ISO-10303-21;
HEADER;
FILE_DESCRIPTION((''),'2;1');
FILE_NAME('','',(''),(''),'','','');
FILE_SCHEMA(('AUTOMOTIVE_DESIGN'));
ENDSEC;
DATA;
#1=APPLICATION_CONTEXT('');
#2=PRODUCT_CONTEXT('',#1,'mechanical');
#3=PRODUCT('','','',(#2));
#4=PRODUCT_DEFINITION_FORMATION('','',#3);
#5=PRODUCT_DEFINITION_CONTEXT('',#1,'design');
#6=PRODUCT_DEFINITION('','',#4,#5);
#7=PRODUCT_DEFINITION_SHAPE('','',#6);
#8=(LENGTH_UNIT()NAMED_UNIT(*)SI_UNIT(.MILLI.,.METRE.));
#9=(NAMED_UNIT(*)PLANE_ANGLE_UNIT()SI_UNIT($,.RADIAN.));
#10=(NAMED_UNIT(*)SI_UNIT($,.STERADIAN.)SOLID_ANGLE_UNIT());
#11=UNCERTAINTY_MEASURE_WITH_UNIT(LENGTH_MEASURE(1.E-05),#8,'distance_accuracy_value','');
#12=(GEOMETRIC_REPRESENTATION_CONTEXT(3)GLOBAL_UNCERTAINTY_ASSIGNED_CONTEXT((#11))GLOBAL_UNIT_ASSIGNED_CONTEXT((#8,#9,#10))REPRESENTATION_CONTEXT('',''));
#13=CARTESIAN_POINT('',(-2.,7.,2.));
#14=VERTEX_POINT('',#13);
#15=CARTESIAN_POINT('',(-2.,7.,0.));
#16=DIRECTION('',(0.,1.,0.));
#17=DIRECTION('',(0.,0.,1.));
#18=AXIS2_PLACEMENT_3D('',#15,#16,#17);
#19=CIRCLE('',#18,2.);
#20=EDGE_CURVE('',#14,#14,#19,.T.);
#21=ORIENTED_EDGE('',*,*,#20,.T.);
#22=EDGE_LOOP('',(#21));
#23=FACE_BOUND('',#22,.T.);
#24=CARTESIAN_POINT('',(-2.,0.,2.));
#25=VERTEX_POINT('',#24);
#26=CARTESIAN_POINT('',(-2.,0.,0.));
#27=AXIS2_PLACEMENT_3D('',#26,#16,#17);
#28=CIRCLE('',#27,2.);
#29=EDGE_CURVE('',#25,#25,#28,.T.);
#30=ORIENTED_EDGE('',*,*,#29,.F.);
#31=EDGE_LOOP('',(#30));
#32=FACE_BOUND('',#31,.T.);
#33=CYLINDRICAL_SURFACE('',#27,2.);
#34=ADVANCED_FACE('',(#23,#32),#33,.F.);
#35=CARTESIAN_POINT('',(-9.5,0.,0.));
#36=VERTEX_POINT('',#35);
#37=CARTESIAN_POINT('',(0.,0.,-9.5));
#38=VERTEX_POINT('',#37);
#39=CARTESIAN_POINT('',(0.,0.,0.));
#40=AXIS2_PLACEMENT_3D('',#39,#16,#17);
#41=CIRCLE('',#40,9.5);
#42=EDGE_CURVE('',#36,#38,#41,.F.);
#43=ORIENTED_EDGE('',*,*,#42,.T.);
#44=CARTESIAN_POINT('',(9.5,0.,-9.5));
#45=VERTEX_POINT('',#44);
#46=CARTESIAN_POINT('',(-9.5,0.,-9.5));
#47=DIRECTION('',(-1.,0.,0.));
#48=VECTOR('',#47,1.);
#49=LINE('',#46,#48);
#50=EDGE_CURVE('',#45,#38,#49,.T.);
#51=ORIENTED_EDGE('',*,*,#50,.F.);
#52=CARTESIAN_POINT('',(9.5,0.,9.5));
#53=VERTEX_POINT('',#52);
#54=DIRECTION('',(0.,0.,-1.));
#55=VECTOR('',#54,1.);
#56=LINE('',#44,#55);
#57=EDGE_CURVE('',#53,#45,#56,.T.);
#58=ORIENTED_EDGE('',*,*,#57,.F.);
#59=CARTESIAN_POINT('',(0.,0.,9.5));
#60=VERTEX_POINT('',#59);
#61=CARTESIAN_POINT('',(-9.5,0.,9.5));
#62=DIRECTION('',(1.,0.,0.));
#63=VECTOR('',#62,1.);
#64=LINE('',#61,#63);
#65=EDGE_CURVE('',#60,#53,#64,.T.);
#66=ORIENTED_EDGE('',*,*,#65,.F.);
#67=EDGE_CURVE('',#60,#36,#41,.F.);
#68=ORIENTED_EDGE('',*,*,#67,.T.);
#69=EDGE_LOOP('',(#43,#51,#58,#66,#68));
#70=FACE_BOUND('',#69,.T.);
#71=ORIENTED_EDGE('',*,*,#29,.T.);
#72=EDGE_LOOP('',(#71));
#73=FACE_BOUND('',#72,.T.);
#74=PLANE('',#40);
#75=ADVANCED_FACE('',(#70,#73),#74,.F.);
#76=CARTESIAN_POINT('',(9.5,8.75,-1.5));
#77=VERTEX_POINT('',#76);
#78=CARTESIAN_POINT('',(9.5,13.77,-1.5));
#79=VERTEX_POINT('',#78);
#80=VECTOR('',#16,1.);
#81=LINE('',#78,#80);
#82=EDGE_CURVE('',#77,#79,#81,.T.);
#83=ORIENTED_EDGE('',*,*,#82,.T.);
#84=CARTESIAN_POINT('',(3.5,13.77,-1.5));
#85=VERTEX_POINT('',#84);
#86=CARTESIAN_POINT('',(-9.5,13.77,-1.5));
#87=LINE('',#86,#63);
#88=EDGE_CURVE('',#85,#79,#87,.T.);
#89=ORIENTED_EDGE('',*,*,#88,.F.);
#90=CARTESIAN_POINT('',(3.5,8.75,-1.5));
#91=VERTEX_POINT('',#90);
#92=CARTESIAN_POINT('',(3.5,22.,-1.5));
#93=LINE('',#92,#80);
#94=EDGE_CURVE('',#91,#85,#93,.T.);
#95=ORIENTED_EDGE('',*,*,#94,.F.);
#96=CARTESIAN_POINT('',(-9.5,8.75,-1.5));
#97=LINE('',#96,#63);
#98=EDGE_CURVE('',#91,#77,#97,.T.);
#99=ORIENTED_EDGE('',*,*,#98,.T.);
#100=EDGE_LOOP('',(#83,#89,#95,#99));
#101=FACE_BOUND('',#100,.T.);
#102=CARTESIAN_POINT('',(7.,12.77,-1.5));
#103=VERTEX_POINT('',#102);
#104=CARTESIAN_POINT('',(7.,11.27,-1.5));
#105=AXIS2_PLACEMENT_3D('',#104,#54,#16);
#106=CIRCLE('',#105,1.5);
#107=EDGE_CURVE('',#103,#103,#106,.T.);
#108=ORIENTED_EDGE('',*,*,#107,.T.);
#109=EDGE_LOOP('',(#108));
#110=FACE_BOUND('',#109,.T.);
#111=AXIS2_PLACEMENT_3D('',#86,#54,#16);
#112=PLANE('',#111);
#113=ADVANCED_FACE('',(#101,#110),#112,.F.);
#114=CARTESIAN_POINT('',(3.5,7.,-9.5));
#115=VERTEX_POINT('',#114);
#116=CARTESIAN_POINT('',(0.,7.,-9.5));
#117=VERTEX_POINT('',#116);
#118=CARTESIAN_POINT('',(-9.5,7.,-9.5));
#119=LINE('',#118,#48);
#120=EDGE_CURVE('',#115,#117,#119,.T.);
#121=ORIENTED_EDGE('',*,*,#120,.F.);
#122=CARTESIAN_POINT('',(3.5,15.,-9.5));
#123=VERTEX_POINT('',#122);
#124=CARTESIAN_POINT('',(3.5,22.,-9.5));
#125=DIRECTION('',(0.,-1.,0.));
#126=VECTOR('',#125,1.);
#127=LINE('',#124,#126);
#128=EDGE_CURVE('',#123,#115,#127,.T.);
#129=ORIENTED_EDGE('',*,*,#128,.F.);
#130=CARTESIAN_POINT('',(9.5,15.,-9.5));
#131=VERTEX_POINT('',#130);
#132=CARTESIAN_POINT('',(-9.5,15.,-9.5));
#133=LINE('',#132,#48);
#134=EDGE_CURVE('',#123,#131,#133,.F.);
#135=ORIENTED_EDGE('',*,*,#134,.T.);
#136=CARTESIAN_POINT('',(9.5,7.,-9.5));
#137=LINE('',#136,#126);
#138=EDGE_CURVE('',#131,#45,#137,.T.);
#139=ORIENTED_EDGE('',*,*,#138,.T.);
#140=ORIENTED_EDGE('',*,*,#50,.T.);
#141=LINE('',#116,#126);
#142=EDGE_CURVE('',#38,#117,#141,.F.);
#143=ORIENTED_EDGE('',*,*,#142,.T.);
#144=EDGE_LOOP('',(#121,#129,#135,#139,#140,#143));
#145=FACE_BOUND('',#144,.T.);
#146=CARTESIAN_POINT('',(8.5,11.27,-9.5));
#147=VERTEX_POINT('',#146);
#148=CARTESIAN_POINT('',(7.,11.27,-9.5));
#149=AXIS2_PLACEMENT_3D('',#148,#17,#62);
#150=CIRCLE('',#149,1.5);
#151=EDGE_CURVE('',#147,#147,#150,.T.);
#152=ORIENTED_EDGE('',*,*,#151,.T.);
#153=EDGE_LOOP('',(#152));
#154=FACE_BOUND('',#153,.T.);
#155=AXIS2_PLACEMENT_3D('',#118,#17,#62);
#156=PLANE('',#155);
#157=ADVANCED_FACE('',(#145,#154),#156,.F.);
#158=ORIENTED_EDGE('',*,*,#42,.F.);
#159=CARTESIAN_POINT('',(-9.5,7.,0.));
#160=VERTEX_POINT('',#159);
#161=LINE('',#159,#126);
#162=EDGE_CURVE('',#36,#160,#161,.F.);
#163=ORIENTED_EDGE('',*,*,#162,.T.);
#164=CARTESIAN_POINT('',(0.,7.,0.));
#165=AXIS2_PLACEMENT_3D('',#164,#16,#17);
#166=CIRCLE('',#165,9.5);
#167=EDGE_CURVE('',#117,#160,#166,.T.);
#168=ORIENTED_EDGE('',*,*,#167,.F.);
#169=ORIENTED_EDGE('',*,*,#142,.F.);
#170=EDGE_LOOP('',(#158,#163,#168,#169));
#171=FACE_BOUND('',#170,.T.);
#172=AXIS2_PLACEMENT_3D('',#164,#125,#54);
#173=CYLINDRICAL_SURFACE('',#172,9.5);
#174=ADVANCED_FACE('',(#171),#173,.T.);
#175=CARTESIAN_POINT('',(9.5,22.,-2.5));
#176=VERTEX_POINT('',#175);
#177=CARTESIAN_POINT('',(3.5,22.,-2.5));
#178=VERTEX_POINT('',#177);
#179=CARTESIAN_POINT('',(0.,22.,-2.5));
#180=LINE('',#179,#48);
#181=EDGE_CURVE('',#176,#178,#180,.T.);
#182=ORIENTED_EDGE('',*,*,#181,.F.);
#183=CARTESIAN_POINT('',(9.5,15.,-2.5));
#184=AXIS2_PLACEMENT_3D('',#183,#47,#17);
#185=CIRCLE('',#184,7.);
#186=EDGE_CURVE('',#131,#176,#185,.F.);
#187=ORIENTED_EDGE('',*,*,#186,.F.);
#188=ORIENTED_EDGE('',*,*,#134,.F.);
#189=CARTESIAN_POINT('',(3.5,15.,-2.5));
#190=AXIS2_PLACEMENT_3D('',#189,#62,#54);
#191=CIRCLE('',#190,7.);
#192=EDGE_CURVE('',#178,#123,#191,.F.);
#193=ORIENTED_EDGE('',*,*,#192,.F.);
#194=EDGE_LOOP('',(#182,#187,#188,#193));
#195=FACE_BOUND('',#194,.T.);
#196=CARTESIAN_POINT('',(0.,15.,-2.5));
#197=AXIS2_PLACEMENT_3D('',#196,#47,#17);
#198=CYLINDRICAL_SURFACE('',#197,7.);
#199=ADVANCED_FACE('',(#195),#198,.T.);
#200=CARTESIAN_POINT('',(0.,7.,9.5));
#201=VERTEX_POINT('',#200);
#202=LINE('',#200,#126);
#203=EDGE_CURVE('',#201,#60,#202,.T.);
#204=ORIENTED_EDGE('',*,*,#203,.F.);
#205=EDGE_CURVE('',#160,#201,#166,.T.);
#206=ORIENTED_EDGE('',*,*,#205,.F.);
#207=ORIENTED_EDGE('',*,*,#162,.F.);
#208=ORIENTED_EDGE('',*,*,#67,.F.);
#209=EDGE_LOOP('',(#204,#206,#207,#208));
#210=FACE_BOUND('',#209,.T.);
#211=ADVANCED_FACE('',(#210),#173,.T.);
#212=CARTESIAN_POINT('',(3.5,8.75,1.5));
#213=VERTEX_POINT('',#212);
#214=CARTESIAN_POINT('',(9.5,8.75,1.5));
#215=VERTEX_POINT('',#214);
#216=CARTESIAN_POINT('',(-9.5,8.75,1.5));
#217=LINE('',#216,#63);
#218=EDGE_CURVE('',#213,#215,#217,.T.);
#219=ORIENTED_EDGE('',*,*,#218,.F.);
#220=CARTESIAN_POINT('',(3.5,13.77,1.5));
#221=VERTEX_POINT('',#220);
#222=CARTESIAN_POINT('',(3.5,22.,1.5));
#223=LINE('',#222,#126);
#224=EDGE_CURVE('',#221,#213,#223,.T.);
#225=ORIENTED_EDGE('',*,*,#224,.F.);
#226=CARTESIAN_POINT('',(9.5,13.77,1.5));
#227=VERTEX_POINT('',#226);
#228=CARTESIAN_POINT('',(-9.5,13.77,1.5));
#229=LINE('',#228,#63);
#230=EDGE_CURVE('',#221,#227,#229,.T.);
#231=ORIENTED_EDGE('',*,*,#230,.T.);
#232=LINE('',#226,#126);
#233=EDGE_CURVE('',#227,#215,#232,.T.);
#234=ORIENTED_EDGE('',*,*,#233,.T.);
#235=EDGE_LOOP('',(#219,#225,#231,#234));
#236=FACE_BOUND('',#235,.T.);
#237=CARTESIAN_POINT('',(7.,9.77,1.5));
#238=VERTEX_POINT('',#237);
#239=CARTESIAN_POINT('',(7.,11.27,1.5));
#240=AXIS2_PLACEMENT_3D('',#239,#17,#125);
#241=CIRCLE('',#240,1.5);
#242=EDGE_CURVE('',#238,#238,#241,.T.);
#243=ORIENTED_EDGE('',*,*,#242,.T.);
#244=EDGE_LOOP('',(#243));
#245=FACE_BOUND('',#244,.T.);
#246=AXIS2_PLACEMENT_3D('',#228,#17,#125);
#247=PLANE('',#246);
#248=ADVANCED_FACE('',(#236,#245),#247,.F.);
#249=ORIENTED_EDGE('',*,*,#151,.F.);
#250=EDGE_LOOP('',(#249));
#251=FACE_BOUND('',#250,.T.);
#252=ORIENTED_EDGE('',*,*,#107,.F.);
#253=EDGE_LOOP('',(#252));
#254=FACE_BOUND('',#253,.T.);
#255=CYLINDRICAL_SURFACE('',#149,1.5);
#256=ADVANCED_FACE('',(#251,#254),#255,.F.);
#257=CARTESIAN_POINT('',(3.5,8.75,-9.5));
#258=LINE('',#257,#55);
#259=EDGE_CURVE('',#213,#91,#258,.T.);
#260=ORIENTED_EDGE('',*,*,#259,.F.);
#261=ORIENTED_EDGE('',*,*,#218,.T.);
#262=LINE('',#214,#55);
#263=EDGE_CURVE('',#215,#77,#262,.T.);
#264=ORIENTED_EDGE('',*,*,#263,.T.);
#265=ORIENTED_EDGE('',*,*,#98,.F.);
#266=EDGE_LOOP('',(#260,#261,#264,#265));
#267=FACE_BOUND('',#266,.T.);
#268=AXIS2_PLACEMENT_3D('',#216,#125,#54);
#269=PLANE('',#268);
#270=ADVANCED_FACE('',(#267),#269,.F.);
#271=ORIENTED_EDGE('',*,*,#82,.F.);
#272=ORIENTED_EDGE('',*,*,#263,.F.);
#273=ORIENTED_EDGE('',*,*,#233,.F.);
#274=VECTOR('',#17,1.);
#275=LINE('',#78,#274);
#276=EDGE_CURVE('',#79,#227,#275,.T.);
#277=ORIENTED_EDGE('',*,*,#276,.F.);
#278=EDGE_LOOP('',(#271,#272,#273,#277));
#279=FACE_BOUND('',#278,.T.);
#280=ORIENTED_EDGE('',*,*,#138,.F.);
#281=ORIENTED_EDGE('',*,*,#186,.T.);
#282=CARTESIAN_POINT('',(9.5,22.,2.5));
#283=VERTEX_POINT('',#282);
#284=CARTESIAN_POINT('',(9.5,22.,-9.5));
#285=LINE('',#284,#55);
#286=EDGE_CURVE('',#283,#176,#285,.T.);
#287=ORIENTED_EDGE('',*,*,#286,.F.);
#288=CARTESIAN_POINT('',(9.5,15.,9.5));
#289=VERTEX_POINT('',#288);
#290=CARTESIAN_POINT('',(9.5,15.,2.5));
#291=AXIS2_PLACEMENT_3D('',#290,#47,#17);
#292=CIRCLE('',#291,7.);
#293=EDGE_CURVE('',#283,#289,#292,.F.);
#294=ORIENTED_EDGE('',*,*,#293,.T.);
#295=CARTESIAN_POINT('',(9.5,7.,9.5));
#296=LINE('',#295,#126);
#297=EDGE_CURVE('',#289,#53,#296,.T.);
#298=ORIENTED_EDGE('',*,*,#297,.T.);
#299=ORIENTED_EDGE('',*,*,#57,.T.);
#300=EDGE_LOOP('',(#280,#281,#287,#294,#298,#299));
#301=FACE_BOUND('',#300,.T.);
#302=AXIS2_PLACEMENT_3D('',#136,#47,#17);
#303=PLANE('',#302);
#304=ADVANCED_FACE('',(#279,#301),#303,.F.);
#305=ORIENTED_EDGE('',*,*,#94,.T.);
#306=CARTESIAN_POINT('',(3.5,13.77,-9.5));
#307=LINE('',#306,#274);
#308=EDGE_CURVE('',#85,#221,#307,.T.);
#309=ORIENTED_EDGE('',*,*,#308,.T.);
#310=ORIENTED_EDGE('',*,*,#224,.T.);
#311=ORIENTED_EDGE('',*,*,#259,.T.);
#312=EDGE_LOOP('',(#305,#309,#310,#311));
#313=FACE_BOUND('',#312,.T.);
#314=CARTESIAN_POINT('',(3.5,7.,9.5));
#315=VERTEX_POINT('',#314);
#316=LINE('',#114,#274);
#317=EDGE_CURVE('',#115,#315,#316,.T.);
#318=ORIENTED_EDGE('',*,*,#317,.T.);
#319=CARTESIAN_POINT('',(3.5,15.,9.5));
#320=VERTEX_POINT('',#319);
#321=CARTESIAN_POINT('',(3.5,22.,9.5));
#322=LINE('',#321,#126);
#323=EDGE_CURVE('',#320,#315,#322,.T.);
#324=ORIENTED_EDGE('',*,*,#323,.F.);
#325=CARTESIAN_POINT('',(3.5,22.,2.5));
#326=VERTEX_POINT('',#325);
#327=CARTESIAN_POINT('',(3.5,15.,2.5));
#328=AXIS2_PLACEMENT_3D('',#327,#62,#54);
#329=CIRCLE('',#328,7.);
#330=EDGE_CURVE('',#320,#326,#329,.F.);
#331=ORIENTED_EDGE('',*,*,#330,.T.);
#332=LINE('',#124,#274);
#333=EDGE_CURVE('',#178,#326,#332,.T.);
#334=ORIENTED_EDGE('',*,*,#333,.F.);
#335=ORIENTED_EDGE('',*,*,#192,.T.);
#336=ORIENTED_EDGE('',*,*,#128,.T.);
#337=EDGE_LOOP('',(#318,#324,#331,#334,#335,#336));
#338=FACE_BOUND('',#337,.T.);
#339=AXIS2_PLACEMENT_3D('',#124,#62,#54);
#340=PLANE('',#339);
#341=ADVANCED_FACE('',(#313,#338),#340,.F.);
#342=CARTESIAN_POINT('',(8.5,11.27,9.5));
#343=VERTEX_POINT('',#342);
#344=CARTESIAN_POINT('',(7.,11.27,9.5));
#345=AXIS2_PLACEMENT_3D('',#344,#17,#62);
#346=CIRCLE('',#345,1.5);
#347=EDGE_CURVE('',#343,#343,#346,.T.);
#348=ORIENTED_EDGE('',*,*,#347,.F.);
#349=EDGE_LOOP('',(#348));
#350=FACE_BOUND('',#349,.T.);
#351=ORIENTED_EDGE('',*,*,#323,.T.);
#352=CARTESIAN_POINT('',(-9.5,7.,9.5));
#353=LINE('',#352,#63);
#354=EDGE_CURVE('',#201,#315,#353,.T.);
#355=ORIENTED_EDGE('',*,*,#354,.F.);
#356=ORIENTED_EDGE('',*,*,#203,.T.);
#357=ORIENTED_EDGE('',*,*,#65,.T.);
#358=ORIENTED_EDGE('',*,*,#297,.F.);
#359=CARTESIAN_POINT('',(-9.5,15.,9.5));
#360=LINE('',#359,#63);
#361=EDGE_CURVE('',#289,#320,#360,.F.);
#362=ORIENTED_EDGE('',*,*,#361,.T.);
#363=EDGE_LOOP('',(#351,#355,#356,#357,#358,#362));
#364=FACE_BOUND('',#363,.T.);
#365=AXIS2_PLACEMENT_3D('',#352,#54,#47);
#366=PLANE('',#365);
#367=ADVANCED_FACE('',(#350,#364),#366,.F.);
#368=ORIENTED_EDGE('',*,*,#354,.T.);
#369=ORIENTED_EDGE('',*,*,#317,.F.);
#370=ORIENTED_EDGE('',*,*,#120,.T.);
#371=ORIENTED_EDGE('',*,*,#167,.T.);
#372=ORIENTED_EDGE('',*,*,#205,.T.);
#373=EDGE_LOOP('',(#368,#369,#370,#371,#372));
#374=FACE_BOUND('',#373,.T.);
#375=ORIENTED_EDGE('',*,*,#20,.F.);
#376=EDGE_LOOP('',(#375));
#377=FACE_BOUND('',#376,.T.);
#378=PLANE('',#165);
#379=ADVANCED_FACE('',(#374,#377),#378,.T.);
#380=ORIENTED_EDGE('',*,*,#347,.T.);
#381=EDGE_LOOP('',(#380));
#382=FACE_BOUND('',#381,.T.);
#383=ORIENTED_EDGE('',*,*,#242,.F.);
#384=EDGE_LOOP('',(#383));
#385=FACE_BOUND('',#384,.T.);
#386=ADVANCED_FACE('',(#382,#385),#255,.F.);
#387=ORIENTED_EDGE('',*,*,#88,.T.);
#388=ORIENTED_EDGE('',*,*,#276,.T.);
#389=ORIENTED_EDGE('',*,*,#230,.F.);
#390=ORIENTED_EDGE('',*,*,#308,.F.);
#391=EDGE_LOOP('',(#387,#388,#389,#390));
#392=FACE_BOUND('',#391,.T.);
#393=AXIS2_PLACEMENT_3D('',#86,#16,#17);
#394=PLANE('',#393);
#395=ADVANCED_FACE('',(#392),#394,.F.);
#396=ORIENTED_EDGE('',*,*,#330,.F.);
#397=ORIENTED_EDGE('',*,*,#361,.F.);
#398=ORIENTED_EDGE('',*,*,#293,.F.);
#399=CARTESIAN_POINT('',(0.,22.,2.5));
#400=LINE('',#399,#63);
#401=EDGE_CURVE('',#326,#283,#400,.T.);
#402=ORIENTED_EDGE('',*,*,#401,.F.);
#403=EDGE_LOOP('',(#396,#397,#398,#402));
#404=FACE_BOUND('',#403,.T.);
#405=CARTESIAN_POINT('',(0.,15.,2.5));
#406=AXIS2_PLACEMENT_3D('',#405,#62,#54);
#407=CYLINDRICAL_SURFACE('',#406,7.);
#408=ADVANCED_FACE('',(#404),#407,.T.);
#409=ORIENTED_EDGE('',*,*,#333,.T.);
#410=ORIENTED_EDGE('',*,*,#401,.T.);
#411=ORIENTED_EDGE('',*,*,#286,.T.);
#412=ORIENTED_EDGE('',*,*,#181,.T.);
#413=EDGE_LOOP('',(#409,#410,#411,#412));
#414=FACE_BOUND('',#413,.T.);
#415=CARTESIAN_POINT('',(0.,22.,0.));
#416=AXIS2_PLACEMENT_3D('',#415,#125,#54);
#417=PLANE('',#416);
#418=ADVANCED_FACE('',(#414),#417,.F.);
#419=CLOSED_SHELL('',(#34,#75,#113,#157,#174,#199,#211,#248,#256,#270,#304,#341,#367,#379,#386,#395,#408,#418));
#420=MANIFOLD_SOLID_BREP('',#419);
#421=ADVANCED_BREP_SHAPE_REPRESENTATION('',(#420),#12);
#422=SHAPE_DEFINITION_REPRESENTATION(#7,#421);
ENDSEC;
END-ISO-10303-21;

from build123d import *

# Parameters (mm, degrees)
SKETCH1_W               = 19
SKETCH1_H               = 19
BOSS_EXTRUDE1_DEPTH     = 7
FILLET1_R               = 9.5
SKETCH2_W               = 6
SKETCH2_H               = 19
BOSS_EXTRUDE2_DEPTH     = 15
FILLET2_R               = 7
SKETCH3_W               = 3
SKETCH3_H               = 5.02
CUT_EXTRUDE1_DEPTH      = 31.581857367
CUT_EXTRUDE2_DEPTH      = 27.367593747
CUT_EXTRUDE2_DEPTH_BACK = 27.367593747
SKETCH4_R               = 1.5
SKETCH5_R               = 2
CUT_EXTRUDE3_DEPTH      = 21.137030566


with BuildPart() as part:
    # Sketch1 → Boss-Extrude1 (new body)
    with BuildSketch(Plane(origin=(0, 0, 0), x_dir=(1, 0, 0), z_dir=(0, 1, 0))):
        Rectangle(SKETCH1_W, SKETCH1_H)
    extrude(amount=BOSS_EXTRUDE1_DEPTH)

    # Fillet1
    fillet1_edges = [part.edges().sort_by_distance(p)[0] for p in [
        (-9.5, 3.5, -9.5),
        (-9.5, 3.5, 9.5),
    ]]
    fillet(fillet1_edges, radius=FILLET1_R - 0.0001)  # a hair under: the kernel refuses the full size

    # Sketch2 → Boss-Extrude2 (add)
    with BuildSketch(Plane(origin=(0, 7, 0), x_dir=(1, 0, 0), z_dir=(0, 1, 0))):
        with Locations((6.5, 0)):
            Rectangle(SKETCH2_W, SKETCH2_H)
    extrude(amount=BOSS_EXTRUDE2_DEPTH)

    # Fillet2
    fillet2_edges = [part.edges().sort_by_distance(p)[0] for p in [
        (6.5, 22, -9.5),
        (6.5, 22, 9.5),
    ]]
    fillet(fillet2_edges, radius=FILLET2_R)

    # Sketch3 → Cut-Extrude1 (cut, through all)
    with BuildSketch(Plane(origin=(9.5, 0, 0), x_dir=(0, 0, -1), z_dir=(1, 0, 0))):
        with Locations((0, 11.26)):
            Rectangle(SKETCH3_W, SKETCH3_H)
    extrude(amount=-CUT_EXTRUDE1_DEPTH, mode=Mode.SUBTRACT)

    # Sketch4 → Cut-Extrude2 (cut, two sides: drawn at the far end of the back side and taken through both)
    with BuildSketch(Plane.XY.offset(-1.5).offset(-CUT_EXTRUDE2_DEPTH_BACK)):
        with Locations((7, 11.27)):
            Circle(SKETCH4_R)
    extrude(amount=CUT_EXTRUDE2_DEPTH + CUT_EXTRUDE2_DEPTH_BACK, mode=Mode.SUBTRACT)

    # Sketch5 → Cut-Extrude3 (cut, through all)
    with BuildSketch(Plane(origin=(0, 7, 0), x_dir=(1, 0, 0), z_dir=(0, 1, 0))):
        with Locations(Location((-2, 0, 0), (0, 0, 270))):
            Circle(SKETCH5_R)
    extrude(amount=-CUT_EXTRUDE3_DEPTH, mode=Mode.SUBTRACT)


solid = part.part
